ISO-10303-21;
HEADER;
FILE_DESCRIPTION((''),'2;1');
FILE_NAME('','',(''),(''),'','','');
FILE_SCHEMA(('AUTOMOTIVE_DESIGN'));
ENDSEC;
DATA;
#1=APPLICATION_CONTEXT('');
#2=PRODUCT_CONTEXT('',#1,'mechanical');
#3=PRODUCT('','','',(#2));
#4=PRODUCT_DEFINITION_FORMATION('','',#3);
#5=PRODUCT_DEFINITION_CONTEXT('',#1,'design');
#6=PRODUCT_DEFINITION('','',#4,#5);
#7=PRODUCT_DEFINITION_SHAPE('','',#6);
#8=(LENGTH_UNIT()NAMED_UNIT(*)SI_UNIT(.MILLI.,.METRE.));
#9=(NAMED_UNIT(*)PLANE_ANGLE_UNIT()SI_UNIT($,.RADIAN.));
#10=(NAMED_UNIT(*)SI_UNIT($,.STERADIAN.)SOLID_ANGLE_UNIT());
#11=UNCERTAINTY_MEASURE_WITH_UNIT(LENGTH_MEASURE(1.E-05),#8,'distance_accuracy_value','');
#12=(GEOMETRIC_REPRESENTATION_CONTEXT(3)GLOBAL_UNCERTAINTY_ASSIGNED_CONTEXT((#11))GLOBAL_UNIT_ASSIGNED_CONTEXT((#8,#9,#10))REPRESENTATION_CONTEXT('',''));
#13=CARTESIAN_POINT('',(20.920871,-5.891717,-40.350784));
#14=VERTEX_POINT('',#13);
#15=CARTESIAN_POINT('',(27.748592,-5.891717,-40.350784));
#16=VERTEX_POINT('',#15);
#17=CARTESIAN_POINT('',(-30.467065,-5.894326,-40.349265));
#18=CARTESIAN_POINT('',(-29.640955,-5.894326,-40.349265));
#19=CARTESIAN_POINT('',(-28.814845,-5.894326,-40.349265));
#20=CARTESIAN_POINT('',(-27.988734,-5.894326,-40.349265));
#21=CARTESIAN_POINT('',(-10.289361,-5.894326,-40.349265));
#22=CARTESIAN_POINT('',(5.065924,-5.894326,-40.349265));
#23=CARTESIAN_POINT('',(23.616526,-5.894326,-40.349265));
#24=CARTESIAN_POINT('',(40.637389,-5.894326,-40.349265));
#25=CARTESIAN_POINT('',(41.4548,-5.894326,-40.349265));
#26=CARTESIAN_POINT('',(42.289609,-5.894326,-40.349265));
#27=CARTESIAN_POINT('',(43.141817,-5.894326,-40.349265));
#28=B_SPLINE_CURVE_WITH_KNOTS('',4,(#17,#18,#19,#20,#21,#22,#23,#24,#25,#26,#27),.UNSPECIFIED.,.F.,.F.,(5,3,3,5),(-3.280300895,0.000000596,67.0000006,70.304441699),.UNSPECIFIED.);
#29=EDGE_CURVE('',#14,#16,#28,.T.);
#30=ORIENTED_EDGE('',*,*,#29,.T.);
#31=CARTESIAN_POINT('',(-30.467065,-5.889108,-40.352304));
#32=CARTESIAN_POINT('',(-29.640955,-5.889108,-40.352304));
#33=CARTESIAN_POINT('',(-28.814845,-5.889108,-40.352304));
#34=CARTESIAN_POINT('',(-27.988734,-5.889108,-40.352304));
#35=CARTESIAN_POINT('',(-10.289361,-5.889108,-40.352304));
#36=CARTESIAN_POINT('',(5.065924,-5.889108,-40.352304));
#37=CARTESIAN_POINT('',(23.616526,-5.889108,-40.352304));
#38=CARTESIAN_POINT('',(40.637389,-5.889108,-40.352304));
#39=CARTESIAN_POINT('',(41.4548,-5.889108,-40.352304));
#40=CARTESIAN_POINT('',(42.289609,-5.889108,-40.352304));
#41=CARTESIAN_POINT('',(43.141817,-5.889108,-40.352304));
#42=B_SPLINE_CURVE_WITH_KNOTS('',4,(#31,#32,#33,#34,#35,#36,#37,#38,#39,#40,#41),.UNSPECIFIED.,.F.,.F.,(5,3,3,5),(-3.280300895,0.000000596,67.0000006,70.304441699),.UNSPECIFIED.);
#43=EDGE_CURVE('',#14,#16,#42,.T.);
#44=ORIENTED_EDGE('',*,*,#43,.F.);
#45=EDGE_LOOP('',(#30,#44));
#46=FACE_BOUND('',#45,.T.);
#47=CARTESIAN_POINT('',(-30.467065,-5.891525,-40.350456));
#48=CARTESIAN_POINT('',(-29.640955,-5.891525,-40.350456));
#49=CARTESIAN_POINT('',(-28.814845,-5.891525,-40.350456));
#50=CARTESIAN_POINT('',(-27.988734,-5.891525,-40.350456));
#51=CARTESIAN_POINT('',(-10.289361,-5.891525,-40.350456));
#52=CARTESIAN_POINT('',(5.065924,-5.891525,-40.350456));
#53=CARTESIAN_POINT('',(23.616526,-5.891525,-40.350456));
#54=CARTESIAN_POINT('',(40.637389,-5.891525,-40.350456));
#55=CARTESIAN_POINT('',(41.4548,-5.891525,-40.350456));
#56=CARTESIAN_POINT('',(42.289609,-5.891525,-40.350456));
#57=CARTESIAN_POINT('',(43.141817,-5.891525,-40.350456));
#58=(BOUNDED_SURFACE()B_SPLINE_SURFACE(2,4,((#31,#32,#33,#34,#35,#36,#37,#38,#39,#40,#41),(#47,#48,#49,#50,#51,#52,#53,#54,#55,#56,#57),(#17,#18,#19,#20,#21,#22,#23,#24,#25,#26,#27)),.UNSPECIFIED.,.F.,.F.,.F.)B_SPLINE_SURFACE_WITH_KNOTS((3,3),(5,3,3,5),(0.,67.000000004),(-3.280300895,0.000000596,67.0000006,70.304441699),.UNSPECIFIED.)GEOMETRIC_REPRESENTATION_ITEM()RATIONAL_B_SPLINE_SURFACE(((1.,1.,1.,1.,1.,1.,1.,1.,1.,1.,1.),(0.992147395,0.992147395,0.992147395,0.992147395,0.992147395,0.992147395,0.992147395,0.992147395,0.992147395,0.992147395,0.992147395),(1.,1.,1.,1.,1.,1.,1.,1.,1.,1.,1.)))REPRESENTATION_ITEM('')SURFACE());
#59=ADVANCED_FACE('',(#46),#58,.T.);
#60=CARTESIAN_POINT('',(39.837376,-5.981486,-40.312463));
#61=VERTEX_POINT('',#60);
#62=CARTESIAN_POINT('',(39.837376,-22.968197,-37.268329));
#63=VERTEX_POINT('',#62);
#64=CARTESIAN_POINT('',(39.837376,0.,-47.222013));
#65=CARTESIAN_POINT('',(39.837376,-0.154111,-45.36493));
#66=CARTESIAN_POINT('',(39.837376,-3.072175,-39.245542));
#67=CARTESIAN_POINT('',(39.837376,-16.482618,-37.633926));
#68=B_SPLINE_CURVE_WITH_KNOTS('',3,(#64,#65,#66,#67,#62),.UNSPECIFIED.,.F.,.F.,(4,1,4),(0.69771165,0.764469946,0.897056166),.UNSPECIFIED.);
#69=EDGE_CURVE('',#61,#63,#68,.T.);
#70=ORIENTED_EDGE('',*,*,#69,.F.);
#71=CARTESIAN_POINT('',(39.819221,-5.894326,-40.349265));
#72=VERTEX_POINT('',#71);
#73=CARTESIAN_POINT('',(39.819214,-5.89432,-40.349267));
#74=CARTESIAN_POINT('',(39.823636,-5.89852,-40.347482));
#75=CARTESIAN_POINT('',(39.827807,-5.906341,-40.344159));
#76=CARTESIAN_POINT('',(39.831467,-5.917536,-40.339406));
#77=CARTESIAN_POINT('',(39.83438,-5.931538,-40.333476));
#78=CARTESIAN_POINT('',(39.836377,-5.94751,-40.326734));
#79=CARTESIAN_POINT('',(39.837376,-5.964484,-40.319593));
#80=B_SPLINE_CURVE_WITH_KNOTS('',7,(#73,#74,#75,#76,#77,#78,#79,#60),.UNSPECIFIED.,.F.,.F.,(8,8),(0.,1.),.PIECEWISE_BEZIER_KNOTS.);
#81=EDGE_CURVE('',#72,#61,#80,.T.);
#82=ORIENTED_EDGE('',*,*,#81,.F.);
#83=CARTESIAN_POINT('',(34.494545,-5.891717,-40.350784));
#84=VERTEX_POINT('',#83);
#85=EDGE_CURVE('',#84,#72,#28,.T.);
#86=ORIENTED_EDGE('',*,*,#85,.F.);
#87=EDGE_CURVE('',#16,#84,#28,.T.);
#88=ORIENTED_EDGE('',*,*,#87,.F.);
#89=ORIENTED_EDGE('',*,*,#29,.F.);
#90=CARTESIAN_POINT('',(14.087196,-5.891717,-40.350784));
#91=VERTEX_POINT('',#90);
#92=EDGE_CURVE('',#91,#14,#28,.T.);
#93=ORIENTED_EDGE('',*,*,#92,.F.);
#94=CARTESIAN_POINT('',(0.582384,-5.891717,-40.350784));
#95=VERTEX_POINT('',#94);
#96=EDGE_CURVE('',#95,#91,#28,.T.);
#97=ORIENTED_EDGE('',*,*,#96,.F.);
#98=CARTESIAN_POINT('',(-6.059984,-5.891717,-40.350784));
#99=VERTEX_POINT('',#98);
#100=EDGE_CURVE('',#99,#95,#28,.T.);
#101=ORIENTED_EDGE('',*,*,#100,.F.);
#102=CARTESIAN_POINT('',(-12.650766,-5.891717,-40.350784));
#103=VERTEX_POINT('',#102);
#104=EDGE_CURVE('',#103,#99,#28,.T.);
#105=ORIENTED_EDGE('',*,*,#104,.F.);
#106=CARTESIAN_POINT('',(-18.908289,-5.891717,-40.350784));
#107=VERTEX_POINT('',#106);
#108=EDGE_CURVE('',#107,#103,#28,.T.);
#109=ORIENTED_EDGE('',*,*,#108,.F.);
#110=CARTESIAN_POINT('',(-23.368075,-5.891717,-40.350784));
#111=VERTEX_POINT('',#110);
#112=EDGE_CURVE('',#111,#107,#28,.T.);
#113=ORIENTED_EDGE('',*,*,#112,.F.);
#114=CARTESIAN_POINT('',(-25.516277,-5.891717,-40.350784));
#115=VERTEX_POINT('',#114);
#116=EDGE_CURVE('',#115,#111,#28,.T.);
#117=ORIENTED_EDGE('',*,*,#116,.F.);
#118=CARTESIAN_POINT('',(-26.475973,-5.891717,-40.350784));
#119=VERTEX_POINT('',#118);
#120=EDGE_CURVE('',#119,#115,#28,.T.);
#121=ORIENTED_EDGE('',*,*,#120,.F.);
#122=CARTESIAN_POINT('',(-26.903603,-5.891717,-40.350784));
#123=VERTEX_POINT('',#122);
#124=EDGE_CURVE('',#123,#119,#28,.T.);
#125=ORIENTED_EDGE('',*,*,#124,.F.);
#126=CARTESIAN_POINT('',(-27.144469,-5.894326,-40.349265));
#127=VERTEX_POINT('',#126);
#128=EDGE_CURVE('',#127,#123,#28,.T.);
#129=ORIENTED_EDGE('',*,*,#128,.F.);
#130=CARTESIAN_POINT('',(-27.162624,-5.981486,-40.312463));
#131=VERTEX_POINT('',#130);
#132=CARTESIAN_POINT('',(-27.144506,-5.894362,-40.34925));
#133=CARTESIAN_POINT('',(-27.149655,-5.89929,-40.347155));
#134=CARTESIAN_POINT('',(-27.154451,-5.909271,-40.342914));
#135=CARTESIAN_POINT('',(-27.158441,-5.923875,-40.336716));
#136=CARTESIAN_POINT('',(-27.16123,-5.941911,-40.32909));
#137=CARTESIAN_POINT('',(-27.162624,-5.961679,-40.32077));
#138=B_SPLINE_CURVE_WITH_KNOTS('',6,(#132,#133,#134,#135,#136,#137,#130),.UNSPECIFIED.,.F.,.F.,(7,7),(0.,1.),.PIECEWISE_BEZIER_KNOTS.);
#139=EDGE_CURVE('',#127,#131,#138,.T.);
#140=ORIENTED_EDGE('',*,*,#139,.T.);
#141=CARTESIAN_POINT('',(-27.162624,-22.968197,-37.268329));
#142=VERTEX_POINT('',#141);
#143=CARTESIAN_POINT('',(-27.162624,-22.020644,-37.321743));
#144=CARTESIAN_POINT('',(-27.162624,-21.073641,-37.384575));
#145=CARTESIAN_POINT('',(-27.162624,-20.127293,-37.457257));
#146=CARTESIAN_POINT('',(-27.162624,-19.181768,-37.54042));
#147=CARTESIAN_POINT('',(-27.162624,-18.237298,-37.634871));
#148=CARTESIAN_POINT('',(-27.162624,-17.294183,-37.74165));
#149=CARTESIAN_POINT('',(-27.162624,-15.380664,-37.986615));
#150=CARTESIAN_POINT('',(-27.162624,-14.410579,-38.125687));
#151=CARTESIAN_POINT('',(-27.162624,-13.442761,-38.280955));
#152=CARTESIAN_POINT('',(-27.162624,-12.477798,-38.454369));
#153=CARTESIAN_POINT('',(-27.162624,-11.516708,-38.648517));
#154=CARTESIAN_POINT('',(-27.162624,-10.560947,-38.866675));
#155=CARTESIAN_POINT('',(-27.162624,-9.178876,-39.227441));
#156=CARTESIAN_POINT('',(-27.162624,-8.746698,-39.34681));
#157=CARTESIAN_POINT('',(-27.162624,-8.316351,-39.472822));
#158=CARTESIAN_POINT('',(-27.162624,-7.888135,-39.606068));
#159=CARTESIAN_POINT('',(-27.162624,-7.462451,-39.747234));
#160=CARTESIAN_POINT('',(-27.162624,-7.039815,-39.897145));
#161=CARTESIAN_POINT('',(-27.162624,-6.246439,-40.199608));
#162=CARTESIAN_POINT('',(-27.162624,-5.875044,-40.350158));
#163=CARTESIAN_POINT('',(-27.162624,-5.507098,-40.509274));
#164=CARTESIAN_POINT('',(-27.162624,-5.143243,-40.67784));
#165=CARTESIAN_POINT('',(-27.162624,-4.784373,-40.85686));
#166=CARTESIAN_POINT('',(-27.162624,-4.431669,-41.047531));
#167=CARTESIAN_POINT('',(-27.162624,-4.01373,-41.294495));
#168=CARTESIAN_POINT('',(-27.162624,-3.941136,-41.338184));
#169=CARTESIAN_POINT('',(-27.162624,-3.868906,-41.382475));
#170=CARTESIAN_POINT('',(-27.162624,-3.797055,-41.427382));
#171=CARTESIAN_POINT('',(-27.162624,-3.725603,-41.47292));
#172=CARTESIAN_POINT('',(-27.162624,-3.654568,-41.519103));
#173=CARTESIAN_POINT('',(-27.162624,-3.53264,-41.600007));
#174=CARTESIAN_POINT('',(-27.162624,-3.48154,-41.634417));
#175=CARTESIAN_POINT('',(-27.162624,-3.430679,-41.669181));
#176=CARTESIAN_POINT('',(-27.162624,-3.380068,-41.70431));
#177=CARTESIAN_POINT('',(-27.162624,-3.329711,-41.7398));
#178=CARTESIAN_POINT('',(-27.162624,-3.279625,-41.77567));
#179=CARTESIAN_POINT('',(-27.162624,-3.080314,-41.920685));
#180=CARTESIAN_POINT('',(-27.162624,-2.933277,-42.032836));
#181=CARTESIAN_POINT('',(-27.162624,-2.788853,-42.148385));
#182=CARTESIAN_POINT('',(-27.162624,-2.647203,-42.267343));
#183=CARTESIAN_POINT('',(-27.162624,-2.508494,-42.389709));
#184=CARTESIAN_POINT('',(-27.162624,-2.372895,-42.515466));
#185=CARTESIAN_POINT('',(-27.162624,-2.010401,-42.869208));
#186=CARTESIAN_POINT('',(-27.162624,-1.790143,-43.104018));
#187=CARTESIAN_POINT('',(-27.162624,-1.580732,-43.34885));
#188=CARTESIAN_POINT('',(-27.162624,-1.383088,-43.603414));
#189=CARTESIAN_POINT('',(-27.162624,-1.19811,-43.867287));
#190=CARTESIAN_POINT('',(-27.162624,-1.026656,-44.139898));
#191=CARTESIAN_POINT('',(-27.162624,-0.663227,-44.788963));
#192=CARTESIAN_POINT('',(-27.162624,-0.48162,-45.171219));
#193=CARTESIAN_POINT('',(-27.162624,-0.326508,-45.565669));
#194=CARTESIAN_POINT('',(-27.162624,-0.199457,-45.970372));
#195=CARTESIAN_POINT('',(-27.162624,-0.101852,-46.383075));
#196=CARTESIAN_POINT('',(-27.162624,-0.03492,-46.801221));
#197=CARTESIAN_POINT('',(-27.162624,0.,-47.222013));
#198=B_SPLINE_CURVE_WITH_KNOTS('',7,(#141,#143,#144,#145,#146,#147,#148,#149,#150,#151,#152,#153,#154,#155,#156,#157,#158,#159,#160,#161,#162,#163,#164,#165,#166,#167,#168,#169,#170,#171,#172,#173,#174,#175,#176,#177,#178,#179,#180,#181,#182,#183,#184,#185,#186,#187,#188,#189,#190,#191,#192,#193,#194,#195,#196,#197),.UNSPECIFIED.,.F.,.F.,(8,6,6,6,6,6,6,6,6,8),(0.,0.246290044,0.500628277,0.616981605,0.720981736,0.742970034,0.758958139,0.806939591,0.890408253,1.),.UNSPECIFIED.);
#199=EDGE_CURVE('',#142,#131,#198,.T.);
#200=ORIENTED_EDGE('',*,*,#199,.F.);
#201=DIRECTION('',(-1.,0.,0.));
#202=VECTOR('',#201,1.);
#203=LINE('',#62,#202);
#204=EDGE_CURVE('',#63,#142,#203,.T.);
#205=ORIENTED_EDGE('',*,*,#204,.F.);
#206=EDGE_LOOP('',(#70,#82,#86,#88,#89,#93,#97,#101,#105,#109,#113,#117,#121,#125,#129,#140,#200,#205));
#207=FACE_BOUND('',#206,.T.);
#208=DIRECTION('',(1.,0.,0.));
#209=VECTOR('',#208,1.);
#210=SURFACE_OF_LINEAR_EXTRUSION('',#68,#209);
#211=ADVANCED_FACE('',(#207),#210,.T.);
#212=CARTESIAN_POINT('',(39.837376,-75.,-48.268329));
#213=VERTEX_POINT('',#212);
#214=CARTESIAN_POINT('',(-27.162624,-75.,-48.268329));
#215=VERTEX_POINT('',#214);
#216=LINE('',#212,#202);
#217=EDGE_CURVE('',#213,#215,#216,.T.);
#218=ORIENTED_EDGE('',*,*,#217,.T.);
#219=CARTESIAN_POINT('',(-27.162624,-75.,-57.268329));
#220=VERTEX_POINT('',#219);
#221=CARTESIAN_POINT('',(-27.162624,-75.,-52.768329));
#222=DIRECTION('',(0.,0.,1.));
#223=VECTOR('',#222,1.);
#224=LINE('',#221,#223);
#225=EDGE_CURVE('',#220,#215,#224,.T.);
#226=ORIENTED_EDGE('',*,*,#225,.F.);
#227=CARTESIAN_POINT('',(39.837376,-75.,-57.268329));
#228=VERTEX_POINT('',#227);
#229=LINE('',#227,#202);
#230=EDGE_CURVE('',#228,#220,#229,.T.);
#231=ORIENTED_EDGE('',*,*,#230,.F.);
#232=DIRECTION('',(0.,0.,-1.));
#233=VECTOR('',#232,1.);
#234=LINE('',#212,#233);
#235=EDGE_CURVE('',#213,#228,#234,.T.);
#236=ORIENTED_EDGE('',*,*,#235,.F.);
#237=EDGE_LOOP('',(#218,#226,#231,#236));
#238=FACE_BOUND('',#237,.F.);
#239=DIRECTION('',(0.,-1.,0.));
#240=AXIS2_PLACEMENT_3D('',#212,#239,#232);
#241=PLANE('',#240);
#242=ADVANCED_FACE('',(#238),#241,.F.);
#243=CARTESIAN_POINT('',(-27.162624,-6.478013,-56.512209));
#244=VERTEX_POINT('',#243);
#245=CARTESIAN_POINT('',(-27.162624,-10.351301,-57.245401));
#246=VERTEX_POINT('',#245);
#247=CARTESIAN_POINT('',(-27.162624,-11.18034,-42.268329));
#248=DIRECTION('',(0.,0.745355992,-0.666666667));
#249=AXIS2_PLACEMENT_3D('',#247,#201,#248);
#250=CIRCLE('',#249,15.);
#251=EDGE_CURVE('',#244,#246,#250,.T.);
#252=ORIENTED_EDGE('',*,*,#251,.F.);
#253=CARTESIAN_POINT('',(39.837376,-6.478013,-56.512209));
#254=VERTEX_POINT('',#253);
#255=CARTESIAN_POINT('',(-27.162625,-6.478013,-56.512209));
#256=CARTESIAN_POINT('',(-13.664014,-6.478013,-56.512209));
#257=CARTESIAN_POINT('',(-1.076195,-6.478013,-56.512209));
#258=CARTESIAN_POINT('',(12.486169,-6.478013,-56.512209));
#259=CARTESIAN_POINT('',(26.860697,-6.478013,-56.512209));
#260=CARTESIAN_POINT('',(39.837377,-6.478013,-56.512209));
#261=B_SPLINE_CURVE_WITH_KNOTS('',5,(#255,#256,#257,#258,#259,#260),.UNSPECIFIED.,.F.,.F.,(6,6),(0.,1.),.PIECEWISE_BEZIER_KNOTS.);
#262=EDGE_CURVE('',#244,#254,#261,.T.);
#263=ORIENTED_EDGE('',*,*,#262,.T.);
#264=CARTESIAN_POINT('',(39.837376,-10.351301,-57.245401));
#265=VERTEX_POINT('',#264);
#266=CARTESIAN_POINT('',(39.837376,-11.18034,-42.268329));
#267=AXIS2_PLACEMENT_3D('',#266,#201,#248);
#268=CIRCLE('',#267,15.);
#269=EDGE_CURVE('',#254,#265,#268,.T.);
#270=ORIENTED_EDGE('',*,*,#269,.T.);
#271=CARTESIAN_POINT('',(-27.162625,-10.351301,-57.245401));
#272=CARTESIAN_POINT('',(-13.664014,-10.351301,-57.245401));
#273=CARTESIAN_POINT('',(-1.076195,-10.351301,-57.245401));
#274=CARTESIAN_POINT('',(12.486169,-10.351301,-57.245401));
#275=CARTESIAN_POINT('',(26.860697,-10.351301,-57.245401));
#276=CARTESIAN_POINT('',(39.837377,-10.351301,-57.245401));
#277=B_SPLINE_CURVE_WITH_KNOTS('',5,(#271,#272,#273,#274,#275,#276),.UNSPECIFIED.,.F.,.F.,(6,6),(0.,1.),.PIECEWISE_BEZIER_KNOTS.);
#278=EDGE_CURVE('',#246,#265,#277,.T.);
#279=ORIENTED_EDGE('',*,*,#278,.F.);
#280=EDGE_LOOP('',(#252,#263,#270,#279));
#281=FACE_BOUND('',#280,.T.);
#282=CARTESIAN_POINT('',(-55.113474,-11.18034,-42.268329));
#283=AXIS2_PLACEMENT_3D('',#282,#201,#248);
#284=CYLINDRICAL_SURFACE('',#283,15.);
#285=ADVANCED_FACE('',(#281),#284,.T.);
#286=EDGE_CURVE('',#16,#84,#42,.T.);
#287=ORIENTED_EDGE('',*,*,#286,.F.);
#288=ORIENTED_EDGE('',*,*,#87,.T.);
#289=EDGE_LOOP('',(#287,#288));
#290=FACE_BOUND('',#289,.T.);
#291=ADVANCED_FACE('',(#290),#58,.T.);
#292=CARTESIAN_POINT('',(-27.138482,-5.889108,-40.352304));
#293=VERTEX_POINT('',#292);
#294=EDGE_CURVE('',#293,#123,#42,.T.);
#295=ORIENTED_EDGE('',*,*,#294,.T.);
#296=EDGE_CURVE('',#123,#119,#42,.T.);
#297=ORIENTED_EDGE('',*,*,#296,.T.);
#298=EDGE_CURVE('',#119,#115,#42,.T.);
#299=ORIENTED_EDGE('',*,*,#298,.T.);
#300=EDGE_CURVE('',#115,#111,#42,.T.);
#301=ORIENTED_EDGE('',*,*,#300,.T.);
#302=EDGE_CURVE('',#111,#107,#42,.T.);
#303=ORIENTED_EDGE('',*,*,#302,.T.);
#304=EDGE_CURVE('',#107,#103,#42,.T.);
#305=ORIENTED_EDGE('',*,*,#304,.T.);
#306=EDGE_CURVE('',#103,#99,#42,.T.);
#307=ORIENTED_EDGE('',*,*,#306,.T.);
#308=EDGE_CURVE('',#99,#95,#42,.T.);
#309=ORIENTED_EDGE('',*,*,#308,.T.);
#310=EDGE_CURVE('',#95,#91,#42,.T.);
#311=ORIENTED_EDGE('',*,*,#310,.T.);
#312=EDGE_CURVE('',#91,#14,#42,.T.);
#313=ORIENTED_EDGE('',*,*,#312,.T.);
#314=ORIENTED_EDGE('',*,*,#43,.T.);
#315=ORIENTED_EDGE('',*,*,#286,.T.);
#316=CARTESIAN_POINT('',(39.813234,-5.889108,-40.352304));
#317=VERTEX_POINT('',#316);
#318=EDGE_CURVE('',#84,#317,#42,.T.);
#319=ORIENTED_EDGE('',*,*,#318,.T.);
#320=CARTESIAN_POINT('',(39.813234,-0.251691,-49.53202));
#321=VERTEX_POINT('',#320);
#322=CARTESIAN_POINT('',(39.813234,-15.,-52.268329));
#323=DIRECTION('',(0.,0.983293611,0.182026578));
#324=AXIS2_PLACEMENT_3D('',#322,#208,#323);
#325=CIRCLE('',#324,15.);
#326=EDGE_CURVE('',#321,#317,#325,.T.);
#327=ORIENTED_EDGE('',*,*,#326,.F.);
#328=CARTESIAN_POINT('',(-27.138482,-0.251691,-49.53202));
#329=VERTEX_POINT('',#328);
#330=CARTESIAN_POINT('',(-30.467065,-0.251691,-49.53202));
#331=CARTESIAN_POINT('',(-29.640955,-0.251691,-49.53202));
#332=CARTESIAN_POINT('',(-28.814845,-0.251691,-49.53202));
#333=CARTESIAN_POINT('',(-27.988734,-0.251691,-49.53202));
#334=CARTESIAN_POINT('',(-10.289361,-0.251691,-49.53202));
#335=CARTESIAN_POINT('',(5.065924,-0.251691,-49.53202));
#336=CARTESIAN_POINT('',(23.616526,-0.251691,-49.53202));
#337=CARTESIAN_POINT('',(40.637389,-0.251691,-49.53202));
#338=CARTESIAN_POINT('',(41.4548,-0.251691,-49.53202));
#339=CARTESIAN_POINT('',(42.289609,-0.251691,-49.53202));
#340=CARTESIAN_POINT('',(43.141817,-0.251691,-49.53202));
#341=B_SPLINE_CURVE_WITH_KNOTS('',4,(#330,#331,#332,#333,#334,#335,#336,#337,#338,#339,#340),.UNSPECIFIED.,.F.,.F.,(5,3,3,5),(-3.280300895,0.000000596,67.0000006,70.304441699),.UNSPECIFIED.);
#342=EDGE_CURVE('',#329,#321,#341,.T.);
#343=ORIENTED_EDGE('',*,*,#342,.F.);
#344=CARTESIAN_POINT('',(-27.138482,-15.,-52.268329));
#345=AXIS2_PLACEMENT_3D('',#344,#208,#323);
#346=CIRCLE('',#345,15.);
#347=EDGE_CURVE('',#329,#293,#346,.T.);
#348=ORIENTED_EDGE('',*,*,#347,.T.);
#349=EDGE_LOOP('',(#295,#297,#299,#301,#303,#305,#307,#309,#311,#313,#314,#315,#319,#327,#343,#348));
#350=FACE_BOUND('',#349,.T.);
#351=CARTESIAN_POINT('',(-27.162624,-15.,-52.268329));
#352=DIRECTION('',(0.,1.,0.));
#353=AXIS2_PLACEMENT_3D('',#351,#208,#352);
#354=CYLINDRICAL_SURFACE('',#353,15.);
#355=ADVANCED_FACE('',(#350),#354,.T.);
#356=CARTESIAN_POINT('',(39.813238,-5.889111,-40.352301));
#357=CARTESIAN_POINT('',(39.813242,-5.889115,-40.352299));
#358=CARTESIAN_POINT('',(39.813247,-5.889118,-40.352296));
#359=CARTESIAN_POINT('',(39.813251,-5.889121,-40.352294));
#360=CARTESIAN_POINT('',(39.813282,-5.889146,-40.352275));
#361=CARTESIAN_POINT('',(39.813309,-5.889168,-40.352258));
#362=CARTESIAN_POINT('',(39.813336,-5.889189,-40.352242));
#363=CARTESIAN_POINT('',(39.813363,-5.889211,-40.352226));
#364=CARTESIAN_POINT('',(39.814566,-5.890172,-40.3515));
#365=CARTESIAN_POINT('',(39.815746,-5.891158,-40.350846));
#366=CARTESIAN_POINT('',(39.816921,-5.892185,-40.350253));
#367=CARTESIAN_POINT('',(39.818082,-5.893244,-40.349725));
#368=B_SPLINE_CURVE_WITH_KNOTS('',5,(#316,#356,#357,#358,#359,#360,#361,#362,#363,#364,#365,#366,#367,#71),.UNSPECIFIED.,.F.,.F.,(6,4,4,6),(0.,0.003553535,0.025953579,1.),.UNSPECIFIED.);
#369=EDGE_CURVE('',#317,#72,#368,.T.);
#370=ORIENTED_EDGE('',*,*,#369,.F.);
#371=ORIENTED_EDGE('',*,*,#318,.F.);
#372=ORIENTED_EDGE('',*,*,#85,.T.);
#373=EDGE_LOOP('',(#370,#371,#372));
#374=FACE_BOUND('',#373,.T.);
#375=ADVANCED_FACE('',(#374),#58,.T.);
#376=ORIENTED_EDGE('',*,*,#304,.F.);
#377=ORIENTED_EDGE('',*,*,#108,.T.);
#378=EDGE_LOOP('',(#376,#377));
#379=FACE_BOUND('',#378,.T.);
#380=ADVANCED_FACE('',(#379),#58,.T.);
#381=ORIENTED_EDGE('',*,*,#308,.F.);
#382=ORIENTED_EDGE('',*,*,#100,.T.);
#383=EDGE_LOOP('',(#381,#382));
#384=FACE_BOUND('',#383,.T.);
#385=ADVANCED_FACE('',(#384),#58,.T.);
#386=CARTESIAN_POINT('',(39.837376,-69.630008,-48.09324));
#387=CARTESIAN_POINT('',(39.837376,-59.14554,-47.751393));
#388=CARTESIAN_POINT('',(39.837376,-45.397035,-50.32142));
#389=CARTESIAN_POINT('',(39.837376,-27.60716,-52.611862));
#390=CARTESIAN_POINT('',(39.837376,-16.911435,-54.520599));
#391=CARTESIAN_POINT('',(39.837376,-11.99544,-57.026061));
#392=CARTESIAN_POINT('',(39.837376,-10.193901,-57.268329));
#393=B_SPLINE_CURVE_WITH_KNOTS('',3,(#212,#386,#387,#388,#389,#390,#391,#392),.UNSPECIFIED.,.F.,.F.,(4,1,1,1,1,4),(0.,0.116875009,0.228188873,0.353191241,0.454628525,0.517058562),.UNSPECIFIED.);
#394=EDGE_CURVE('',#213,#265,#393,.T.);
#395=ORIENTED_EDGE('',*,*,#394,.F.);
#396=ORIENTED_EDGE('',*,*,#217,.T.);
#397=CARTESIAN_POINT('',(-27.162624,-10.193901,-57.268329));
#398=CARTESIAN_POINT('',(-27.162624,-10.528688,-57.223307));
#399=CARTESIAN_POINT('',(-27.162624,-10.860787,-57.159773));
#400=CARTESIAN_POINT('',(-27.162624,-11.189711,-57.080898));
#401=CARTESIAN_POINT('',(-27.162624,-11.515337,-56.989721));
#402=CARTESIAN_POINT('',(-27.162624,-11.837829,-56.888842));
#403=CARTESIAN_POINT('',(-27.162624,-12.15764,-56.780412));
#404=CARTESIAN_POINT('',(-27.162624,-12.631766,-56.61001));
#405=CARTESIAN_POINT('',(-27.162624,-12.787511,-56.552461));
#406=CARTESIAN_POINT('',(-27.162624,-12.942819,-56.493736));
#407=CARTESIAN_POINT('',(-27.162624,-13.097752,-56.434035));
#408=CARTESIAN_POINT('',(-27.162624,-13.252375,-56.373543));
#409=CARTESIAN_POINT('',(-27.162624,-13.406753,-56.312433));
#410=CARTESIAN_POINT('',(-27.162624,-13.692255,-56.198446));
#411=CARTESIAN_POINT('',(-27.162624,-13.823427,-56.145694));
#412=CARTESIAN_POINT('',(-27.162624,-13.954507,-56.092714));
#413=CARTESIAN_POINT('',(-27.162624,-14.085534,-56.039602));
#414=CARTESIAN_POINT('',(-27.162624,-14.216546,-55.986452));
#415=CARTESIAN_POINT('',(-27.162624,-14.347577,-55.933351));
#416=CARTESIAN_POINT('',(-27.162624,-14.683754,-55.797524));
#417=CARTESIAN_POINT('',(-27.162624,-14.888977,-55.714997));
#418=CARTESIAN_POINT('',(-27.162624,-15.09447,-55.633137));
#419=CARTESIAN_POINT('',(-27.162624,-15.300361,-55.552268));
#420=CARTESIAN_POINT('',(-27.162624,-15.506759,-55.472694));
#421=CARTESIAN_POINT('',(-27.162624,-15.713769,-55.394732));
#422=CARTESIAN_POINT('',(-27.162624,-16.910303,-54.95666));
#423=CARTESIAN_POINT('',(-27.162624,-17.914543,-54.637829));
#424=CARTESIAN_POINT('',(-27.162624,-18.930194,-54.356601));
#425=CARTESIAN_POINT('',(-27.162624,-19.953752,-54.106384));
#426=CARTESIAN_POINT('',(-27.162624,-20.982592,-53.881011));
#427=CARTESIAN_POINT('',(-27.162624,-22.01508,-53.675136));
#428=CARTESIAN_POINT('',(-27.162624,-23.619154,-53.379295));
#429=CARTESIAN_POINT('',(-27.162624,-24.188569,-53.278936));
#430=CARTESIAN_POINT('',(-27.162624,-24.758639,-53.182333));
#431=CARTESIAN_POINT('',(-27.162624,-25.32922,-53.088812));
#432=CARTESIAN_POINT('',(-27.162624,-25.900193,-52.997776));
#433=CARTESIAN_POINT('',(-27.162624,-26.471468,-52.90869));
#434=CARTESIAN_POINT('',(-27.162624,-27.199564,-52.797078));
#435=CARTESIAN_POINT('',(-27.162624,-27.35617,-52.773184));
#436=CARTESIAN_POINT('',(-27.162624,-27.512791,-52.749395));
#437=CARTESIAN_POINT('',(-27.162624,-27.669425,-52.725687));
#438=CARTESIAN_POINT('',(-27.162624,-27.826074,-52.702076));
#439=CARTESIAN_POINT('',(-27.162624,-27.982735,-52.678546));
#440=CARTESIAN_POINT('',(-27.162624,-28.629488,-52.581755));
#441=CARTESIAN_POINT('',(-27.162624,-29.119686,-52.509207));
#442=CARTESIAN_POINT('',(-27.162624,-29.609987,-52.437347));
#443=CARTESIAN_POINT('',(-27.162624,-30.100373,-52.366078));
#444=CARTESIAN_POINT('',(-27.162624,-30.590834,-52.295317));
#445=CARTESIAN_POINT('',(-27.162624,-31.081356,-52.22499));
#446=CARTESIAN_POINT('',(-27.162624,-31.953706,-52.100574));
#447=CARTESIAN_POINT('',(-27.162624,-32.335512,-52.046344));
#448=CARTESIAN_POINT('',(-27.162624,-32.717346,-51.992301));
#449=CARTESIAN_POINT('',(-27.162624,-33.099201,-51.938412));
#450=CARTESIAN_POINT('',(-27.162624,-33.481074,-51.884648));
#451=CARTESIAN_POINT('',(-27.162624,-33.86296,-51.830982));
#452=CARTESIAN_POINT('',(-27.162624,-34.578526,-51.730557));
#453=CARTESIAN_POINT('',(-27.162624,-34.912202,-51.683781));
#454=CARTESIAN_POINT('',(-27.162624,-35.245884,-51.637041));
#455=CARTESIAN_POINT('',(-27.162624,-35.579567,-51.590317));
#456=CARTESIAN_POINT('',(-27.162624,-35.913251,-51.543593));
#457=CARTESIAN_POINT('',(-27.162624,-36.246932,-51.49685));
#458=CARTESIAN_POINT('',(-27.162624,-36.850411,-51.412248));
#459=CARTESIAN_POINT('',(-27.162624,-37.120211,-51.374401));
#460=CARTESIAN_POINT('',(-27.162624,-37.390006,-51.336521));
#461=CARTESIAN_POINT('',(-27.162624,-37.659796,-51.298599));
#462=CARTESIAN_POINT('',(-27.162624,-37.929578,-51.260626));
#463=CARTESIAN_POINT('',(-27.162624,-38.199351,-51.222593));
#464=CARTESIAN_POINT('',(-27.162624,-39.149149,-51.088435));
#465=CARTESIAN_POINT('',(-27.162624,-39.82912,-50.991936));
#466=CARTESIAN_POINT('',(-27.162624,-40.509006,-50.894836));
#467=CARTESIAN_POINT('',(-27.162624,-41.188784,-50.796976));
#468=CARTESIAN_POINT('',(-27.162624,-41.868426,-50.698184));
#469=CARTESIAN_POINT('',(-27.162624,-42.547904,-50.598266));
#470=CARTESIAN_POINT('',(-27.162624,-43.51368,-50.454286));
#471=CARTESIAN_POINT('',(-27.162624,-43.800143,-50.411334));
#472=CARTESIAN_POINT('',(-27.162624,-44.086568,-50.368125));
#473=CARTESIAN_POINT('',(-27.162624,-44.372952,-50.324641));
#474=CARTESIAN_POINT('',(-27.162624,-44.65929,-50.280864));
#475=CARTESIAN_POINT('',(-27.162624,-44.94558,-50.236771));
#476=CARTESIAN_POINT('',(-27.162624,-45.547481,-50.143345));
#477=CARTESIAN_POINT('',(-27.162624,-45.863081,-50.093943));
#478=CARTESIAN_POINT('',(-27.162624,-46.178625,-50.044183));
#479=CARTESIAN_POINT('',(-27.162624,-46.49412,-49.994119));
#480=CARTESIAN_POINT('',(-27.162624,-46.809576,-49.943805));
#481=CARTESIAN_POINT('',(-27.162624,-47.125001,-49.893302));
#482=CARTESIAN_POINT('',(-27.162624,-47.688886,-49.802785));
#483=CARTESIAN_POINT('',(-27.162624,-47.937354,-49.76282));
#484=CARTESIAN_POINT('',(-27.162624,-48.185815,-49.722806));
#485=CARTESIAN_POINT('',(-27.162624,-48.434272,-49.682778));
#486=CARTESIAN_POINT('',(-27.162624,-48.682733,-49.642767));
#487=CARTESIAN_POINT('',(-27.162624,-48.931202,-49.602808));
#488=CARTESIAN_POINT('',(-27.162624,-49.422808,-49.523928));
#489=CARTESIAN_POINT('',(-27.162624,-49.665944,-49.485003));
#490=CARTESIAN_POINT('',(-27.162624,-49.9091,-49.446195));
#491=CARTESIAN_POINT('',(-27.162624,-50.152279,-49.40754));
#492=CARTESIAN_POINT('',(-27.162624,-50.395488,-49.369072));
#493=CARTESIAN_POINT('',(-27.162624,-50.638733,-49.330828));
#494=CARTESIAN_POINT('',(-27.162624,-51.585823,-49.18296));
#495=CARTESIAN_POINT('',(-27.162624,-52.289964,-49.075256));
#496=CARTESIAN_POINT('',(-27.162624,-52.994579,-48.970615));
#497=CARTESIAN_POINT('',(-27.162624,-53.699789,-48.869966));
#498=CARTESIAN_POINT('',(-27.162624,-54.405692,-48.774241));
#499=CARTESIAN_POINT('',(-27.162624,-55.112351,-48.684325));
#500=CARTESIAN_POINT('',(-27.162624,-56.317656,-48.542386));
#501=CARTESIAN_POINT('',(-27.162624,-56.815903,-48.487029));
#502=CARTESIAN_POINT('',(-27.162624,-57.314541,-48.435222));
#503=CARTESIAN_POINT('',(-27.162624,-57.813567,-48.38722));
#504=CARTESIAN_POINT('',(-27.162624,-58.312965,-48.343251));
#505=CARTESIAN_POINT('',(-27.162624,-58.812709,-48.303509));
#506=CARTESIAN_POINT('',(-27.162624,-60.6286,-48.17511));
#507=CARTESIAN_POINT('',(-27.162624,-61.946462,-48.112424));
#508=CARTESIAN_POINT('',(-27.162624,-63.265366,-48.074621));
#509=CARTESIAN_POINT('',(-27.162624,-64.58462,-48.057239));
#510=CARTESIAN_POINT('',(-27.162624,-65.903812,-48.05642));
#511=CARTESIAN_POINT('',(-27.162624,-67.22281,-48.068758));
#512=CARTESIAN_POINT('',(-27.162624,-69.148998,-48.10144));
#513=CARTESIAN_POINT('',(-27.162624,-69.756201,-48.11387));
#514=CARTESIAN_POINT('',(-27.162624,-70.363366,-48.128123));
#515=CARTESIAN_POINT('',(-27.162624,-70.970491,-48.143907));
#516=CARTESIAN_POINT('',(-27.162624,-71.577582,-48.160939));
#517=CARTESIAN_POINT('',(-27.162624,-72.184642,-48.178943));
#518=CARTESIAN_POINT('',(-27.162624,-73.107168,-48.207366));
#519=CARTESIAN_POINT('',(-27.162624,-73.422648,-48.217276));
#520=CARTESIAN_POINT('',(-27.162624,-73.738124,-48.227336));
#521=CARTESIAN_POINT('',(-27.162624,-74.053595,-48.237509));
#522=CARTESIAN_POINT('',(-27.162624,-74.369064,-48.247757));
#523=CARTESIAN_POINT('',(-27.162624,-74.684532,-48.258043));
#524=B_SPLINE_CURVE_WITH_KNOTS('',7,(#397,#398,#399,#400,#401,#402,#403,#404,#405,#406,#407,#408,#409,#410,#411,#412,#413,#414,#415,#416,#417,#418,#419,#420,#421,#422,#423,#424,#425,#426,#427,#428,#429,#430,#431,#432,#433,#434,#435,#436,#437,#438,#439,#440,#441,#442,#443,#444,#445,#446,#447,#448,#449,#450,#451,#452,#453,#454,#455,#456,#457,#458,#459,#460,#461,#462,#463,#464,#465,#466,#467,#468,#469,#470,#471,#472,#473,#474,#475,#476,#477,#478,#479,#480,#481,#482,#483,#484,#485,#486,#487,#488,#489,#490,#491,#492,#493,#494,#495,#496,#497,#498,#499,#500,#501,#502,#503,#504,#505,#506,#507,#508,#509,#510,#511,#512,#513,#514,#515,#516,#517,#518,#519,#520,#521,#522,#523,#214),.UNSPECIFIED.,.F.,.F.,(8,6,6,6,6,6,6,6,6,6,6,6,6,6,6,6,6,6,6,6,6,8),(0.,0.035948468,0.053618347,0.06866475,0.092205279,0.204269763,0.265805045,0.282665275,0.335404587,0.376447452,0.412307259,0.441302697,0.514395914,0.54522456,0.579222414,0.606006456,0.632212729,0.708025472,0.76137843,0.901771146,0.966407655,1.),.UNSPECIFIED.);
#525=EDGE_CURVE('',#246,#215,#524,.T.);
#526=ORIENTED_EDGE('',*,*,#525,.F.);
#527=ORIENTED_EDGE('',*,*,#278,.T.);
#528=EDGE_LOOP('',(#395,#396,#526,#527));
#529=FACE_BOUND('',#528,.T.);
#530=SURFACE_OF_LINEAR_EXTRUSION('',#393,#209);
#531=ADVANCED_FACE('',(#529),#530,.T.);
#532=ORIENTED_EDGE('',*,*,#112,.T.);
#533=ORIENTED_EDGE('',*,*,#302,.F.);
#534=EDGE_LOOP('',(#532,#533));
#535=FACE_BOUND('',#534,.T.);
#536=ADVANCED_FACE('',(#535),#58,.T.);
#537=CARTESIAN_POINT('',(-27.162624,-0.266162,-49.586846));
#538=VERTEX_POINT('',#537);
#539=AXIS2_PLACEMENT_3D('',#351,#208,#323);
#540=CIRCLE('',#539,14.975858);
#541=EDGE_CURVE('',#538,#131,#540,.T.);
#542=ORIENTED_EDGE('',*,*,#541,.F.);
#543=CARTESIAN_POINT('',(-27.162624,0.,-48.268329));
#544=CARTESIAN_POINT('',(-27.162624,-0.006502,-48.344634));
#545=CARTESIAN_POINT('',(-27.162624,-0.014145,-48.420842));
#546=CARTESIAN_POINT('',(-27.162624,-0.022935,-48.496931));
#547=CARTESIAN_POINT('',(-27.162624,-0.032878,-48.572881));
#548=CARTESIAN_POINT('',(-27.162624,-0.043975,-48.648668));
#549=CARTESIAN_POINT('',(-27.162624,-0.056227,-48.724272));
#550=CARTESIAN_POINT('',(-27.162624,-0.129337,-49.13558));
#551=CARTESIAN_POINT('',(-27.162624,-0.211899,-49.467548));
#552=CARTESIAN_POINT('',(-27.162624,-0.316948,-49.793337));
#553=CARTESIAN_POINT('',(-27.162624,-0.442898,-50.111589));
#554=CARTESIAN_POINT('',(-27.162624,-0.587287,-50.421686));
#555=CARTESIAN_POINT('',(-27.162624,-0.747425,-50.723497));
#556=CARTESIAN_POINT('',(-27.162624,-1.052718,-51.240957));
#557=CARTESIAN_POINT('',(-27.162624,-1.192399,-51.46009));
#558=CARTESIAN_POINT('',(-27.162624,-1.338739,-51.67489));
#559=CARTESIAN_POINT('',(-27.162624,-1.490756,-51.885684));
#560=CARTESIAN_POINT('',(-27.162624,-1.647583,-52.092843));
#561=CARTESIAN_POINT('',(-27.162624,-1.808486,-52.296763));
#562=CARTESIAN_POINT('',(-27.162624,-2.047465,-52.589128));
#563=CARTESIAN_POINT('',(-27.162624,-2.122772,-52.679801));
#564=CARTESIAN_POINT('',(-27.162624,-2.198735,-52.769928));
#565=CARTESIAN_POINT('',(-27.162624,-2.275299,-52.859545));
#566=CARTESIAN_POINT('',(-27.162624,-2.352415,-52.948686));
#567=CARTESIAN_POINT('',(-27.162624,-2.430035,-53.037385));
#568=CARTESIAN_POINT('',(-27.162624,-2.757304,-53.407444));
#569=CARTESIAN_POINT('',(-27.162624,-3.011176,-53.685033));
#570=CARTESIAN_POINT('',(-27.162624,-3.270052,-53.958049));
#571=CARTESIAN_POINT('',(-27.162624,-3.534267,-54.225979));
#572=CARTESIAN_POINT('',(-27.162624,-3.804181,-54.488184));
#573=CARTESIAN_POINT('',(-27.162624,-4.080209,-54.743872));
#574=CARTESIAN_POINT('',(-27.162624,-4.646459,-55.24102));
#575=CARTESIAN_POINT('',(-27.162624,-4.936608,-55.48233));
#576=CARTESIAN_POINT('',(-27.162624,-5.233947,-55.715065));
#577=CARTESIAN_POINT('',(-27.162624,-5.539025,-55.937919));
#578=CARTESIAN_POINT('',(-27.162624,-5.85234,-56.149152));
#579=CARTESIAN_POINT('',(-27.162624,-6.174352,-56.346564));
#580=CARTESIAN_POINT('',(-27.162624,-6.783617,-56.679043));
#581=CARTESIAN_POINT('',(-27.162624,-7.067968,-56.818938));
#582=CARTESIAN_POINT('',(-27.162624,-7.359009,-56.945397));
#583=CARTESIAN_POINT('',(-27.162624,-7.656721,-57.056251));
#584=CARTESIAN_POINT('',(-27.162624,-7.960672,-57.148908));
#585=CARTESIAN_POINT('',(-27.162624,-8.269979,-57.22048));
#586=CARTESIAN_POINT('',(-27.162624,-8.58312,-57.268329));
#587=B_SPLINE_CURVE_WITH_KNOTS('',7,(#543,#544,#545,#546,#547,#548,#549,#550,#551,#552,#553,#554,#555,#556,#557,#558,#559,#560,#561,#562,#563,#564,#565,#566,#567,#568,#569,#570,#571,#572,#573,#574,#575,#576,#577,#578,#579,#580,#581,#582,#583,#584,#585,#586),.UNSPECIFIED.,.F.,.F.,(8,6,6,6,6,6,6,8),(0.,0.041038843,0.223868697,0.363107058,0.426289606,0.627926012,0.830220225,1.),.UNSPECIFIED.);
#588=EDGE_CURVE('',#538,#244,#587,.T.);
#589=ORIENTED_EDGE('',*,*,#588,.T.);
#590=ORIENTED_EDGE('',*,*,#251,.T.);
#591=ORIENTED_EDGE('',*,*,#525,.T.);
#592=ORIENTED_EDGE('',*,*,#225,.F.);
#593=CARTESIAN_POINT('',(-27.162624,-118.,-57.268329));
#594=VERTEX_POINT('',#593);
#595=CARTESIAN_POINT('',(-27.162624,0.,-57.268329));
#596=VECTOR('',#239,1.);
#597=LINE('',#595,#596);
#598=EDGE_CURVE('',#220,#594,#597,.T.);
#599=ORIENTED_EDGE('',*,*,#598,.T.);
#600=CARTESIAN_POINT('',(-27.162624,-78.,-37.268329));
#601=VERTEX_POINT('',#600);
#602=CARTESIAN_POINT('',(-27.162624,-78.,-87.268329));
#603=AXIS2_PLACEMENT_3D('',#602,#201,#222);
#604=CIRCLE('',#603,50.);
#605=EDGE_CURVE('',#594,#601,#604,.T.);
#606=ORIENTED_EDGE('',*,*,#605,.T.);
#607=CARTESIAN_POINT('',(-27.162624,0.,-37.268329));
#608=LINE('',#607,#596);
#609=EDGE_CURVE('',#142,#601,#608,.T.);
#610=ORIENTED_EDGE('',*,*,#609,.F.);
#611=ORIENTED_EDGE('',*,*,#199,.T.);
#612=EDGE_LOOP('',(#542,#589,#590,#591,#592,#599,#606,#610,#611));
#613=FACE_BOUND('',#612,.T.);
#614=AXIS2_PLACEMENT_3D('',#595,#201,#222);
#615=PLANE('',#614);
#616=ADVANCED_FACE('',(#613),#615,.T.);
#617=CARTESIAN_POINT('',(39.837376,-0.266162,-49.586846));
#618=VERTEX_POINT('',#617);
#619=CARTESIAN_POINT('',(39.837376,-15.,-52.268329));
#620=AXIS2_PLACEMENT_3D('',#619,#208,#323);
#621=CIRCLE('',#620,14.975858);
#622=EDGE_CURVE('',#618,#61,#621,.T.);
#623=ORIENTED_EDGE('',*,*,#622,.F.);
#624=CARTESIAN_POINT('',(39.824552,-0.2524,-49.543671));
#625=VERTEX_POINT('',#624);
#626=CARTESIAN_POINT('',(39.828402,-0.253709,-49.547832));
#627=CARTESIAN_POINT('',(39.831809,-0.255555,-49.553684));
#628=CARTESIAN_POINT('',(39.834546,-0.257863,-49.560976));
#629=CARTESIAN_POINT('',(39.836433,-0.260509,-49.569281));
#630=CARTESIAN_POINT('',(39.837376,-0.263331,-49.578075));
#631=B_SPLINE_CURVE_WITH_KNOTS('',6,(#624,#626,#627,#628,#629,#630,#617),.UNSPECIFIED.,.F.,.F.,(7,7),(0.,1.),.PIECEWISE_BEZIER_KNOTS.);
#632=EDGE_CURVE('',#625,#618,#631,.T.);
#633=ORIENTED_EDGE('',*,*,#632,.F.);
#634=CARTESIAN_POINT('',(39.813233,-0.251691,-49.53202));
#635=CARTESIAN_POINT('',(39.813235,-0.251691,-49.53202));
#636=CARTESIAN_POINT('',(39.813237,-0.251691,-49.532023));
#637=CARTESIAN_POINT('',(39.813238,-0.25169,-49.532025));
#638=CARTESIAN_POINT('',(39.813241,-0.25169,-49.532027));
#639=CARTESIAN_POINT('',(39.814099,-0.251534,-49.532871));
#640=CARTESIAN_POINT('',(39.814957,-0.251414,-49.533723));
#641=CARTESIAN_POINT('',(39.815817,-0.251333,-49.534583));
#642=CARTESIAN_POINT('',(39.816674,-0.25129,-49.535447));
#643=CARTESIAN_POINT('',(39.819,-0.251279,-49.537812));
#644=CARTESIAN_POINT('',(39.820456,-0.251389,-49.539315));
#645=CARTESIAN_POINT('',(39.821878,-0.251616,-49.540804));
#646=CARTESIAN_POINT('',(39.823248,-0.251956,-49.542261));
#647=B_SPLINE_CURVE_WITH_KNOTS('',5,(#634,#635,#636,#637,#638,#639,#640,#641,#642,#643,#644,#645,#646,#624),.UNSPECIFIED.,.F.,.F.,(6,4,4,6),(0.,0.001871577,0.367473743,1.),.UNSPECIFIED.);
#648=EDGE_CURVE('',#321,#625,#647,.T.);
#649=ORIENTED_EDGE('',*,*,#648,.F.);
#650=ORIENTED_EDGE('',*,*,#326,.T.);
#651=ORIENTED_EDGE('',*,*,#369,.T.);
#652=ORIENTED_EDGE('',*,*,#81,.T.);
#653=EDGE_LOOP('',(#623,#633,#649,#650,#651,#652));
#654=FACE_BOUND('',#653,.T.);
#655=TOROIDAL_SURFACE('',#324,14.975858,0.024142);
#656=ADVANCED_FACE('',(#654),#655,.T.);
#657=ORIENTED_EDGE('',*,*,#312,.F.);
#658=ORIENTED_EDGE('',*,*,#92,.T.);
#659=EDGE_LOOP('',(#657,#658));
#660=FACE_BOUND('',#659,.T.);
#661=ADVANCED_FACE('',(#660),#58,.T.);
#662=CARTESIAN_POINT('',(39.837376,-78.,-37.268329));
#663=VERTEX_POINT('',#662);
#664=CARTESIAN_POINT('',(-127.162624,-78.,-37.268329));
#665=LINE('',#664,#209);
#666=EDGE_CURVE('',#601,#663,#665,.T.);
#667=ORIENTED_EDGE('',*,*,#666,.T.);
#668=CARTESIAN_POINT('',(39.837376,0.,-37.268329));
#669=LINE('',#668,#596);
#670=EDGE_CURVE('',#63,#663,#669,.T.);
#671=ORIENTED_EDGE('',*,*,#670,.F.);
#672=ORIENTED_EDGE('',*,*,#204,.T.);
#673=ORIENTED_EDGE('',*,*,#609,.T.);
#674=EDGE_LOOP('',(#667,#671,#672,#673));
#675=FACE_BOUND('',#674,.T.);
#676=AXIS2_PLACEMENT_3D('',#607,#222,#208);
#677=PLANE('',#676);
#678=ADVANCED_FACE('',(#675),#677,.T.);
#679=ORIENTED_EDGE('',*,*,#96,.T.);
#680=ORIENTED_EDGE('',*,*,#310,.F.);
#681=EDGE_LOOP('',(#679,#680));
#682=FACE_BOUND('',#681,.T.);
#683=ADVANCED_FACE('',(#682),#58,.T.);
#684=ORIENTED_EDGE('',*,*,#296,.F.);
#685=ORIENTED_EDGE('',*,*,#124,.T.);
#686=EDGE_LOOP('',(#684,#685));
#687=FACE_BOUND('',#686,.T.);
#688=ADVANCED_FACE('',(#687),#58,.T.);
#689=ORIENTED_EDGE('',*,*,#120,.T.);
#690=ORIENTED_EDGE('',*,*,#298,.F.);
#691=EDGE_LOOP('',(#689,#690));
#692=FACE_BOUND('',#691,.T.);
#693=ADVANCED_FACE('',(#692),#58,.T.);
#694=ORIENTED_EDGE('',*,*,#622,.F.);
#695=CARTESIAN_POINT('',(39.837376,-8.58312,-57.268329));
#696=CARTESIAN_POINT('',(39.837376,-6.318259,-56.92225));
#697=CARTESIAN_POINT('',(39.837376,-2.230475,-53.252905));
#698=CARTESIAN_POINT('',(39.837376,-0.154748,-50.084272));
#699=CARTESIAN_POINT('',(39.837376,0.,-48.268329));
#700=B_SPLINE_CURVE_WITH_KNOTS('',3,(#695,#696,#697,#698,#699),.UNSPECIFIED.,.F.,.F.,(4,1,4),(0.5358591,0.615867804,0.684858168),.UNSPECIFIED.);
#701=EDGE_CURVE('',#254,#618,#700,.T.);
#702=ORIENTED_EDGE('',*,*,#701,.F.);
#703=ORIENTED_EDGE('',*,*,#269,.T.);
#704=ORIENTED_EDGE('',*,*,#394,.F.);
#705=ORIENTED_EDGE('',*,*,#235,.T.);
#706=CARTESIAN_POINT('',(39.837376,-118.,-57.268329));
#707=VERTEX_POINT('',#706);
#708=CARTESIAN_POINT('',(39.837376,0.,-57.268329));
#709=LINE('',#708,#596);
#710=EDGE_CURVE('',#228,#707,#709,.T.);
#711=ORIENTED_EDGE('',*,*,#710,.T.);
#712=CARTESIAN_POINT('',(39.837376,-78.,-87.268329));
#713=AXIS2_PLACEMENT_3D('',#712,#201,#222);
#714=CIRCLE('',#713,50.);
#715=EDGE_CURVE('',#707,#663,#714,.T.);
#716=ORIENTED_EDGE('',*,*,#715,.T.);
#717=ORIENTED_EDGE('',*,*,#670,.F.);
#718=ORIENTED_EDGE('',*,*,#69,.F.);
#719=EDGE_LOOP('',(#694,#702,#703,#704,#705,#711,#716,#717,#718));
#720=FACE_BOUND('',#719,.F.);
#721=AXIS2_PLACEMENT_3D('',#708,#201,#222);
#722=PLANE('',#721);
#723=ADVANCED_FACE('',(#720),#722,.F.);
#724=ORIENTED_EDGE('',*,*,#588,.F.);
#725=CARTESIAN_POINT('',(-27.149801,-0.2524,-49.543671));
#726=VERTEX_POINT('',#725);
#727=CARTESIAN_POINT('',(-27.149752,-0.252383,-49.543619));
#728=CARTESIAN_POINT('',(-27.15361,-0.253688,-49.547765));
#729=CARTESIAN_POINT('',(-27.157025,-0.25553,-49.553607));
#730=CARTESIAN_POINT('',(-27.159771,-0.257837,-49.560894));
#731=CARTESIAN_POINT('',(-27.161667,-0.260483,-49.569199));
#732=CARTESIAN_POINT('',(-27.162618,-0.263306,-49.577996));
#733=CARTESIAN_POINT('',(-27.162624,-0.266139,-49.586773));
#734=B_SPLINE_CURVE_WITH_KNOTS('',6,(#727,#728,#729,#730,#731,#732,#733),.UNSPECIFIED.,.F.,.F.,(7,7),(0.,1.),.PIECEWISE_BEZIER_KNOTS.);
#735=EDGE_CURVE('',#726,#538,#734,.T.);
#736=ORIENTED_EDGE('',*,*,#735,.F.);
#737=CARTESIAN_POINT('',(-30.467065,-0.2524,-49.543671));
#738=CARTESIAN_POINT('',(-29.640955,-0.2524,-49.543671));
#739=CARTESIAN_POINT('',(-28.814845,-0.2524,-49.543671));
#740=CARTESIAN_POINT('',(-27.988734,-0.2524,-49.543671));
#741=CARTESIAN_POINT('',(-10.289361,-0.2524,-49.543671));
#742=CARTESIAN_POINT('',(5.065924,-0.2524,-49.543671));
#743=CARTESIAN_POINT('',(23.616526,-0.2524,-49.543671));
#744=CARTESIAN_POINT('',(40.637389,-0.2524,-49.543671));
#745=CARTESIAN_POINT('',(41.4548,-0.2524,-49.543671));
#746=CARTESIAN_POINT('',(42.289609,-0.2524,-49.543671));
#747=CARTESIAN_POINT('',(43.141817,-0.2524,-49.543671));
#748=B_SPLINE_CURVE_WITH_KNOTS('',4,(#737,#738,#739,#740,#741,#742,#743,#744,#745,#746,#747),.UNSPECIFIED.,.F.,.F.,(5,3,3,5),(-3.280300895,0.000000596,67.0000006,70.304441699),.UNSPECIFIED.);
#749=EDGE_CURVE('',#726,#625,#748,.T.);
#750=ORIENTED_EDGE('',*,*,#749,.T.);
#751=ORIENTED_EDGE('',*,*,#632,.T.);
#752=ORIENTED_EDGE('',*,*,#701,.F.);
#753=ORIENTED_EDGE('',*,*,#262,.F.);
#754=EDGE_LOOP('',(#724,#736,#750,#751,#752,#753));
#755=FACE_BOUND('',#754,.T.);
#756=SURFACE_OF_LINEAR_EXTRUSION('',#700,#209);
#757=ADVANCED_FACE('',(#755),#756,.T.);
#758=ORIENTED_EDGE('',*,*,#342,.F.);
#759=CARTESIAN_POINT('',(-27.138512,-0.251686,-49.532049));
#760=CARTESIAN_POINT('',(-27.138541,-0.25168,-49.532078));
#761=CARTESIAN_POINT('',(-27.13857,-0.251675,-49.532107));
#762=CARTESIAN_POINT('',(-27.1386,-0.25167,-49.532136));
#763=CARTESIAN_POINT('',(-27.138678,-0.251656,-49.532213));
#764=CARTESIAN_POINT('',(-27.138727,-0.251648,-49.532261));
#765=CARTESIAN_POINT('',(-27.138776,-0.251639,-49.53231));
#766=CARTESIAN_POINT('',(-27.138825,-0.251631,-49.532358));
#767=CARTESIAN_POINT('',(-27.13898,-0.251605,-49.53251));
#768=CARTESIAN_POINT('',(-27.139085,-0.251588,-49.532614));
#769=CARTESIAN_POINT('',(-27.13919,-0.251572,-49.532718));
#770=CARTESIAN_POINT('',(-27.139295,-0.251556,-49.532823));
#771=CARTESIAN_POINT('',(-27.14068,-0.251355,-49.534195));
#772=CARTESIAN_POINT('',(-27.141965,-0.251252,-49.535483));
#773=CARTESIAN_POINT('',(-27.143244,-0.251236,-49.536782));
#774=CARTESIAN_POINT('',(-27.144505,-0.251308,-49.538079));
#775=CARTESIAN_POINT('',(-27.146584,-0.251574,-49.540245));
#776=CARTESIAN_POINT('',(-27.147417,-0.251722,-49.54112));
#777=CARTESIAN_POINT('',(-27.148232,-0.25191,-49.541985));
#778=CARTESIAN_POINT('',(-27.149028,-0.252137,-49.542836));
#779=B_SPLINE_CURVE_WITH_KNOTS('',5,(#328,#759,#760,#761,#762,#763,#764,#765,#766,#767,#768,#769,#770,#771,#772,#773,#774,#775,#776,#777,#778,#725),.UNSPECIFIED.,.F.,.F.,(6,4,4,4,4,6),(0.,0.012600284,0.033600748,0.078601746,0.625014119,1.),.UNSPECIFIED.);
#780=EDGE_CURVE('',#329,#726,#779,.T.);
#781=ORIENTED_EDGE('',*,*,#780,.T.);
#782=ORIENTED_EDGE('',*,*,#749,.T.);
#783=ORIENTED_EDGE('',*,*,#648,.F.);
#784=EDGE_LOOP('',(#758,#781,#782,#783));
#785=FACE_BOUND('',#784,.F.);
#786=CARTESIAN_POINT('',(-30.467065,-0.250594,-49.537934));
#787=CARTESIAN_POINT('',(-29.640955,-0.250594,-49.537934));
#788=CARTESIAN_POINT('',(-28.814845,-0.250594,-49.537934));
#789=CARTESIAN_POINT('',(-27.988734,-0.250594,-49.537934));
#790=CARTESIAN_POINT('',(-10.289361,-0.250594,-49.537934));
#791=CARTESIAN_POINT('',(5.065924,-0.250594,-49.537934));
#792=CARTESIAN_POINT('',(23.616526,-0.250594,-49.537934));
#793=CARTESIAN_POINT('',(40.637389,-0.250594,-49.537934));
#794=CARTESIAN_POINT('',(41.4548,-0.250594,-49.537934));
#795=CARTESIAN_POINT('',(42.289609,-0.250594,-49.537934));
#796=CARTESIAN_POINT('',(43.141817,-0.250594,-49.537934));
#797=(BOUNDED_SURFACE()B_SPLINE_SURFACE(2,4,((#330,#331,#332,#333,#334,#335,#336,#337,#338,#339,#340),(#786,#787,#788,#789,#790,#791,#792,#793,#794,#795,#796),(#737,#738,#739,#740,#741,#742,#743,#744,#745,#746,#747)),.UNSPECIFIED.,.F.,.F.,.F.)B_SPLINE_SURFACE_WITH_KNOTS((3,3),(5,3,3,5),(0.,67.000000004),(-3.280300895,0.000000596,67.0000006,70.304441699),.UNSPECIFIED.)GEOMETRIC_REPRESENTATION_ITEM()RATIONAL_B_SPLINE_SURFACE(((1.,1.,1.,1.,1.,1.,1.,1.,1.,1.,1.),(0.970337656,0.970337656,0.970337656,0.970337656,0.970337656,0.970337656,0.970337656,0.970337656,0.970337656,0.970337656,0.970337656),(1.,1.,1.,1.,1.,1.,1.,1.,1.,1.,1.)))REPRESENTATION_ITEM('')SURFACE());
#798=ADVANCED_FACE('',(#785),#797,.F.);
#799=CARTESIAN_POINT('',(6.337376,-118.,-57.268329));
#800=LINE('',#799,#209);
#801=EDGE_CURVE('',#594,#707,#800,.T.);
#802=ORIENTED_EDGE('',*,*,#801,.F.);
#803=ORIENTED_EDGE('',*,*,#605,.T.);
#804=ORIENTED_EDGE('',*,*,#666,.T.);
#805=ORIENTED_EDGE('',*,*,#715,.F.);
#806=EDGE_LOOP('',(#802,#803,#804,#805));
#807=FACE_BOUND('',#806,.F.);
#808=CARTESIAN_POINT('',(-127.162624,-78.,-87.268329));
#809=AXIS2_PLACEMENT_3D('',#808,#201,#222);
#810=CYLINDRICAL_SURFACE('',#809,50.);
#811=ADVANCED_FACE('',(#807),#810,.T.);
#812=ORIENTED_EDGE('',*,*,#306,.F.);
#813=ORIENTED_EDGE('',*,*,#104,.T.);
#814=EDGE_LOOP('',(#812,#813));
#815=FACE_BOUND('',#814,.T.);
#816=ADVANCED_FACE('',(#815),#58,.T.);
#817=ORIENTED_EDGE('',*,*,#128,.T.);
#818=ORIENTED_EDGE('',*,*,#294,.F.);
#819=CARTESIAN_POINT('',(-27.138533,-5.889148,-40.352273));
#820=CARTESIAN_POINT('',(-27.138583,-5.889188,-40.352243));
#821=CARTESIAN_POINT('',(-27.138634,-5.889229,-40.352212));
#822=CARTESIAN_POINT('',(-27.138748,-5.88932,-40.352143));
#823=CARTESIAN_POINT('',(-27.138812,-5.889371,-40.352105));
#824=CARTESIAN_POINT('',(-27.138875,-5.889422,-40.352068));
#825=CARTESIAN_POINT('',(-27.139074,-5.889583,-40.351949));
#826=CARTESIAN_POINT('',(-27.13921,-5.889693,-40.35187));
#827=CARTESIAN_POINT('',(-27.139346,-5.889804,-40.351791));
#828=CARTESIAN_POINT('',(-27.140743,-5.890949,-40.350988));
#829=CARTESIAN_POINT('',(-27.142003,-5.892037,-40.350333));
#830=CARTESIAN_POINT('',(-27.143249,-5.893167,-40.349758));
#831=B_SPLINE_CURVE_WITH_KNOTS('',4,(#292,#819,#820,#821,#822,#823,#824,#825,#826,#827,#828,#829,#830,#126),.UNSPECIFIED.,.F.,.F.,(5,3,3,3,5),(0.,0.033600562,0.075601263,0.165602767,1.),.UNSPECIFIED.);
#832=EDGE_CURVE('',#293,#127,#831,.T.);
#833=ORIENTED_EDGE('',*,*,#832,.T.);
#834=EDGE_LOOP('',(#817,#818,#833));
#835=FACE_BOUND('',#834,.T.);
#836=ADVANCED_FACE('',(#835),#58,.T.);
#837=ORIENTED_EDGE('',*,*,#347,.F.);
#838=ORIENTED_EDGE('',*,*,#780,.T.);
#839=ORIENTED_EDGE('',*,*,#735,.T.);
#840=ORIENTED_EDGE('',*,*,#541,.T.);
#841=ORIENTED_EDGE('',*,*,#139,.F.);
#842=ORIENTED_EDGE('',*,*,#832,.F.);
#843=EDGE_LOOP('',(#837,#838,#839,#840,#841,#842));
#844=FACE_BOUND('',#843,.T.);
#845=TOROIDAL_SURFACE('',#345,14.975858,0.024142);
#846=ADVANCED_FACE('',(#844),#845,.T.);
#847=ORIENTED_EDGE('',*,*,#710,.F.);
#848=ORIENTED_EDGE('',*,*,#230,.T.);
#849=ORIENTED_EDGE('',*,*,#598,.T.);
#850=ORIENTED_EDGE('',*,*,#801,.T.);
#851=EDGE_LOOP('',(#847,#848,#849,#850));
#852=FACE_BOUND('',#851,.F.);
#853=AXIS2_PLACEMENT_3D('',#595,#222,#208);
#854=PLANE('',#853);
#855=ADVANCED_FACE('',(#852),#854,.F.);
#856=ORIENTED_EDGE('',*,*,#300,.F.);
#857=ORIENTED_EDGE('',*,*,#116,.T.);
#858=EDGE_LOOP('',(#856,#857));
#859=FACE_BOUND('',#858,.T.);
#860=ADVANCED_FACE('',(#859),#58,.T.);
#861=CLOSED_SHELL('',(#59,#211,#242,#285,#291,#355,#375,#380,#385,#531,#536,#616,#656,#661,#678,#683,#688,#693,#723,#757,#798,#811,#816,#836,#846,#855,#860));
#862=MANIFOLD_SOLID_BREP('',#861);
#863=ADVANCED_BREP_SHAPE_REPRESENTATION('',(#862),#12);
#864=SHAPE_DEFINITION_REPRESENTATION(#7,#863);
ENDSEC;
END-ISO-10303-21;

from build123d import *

# Parameters (mm, degrees)
F0_W        = 67
F0_H        = 20
F1_DEPTH    = 118
F3_T1_DEPTH = 267
F4_R        = 15
F5_T1_DEPTH = 122.9016994375
F6_DEPTH    = 67.001
F7_R        = 0.0241421356


# Not quite as in the source:
# - a fillet or chamfer that OpenCascade refuses, or shapes differently, is made with other operations: its cross-section is extruded or revolved along the edge and cut away or added


with BuildPart() as f1:
    # F0 (on Front) → F1 (new body)
    with BuildSketch(Plane.XZ):
        with Locations((6.337375957, -47.2683286667)):
            Rectangle(F0_W, F0_H)
    extrude(amount=F1_DEPTH)

    # F3: fillet of radius 50 on 1 edges, made by hand

    # F3_s2 → F3_t1 (cut)
    with BuildSketch(Plane.YZ.offset(-127.162624043)):
        with BuildLine():
            ThreePointArc((-78, -37.2683286667), (-100.360679775, -42.5469691167), (-118, -57.2683286667))
            Line((-118, -57.2683286667), (-118, -37.2683286667))
            Line((-118, -37.2683286667), (-78, -37.2683286667))
        make_face()
    extrude(amount=F3_T1_DEPTH, mode=Mode.SUBTRACT)

    # F4
    f4_edges = [f1.edges().sort_by_distance(p)[0] for p in [
        (6.337376, -78, -37.268329),
        (6.337376, 0, -37.268329),
    ]]
    fillet(f4_edges, radius=F4_R)

    # F5: fillet of radius 15 on 1 edges, made by hand

    # F5_s2 → F5_t1 (cut)
    with BuildSketch(Plane.YZ.offset(-55.1134737617)):
        with BuildLine():
            ThreePointArc((0, -52.2683286667), (-5.0566155305, -55.9613926043), (-11.1803398875, -57.2683286667))
            Line((-11.1803398875, -57.2683286667), (0, -57.2683286667))
            Line((0, -57.2683286667), (0, -52.2683286667))
        make_face()
    extrude(amount=F5_T1_DEPTH, mode=Mode.SUBTRACT)

    # F2 (on face) → F6 (cut, through all)
    with BuildSketch(Plane.YZ.offset(39.837375957)):
        with BuildLine():
            Line((-75, -48.2683286667), (-75, -57.2683286667))
            Line((-75, -57.2683286667), (-10.1939006259, -57.2683286667))
            add(Edge.make_bspline(
                [(-75, -48.2683286667), (-69.6300083872, -48.0932397516), (-59.1455400015, -47.7513929988), (-45.397034891, -50.3214203198), (-27.6071602735, -52.6118617406), (-16.9114345494, -54.5205994978), (-11.9954400696, -57.0260607697), (-10.1939006259, -57.2683286667)],
                knots=[0, 0, 0, 0, 0.1168750086, 0.2281888728, 0.353191241, 0.4546285253, 0.5170585623, 0.5170585623, 0.5170585623, 0.5170585623], degree=3))
        make_face()
        with BuildLine():
            add(Edge.make_bspline(
                [(-8.5831200704, -57.2683286667), (-6.3182593416, -56.9222504863), (-2.2304747887, -53.2529046852), (-0.154748351, -50.0842721126), (0, -48.2683286667)],
                knots=[0.5358591005, 0.5358591005, 0.5358591005, 0.5358591005, 0.6158678035, 0.6848581677, 0.6848581677, 0.6848581677, 0.6848581677], degree=3))
            Line((-8.5831200704, -57.2683286667), (0, -57.2683286667))
            Line((0, -57.2683286667), (0, -48.2683286667))
        make_face()
        with BuildLine():
            Line((0, -37.2683286667), (-22.9681972414, -37.2683286667))
            add(Edge.make_bspline(
                [(0, -47.2220127929), (-0.1541112697, -45.3649297857), (-3.0721745265, -39.2455424759), (-16.4826181453, -37.6339263761), (-22.9681972414, -37.2683286667)],
                knots=[0.69771165, 0.69771165, 0.69771165, 0.69771165, 0.7644699458, 0.8970561658, 0.8970561658, 0.8970561658, 0.8970561658], degree=3))
            Line((0, -47.2220127929), (0, -37.2683286667))
        make_face()
    extrude(amount=-F6_DEPTH, mode=Mode.SUBTRACT)

    # F7
    f7_edges = [f1.edges().sort_by_distance(p)[0] for p in [
        (6.337376, -0.250596, -49.53793),
        (-27.162624, -2.21712, -44.41989),
        (6.337376, -5.891526, -40.350456),
        (39.837376, -2.21712, -44.41989),
    ]]
    fillet(f7_edges, radius=F7_R)


solid = f1.part
